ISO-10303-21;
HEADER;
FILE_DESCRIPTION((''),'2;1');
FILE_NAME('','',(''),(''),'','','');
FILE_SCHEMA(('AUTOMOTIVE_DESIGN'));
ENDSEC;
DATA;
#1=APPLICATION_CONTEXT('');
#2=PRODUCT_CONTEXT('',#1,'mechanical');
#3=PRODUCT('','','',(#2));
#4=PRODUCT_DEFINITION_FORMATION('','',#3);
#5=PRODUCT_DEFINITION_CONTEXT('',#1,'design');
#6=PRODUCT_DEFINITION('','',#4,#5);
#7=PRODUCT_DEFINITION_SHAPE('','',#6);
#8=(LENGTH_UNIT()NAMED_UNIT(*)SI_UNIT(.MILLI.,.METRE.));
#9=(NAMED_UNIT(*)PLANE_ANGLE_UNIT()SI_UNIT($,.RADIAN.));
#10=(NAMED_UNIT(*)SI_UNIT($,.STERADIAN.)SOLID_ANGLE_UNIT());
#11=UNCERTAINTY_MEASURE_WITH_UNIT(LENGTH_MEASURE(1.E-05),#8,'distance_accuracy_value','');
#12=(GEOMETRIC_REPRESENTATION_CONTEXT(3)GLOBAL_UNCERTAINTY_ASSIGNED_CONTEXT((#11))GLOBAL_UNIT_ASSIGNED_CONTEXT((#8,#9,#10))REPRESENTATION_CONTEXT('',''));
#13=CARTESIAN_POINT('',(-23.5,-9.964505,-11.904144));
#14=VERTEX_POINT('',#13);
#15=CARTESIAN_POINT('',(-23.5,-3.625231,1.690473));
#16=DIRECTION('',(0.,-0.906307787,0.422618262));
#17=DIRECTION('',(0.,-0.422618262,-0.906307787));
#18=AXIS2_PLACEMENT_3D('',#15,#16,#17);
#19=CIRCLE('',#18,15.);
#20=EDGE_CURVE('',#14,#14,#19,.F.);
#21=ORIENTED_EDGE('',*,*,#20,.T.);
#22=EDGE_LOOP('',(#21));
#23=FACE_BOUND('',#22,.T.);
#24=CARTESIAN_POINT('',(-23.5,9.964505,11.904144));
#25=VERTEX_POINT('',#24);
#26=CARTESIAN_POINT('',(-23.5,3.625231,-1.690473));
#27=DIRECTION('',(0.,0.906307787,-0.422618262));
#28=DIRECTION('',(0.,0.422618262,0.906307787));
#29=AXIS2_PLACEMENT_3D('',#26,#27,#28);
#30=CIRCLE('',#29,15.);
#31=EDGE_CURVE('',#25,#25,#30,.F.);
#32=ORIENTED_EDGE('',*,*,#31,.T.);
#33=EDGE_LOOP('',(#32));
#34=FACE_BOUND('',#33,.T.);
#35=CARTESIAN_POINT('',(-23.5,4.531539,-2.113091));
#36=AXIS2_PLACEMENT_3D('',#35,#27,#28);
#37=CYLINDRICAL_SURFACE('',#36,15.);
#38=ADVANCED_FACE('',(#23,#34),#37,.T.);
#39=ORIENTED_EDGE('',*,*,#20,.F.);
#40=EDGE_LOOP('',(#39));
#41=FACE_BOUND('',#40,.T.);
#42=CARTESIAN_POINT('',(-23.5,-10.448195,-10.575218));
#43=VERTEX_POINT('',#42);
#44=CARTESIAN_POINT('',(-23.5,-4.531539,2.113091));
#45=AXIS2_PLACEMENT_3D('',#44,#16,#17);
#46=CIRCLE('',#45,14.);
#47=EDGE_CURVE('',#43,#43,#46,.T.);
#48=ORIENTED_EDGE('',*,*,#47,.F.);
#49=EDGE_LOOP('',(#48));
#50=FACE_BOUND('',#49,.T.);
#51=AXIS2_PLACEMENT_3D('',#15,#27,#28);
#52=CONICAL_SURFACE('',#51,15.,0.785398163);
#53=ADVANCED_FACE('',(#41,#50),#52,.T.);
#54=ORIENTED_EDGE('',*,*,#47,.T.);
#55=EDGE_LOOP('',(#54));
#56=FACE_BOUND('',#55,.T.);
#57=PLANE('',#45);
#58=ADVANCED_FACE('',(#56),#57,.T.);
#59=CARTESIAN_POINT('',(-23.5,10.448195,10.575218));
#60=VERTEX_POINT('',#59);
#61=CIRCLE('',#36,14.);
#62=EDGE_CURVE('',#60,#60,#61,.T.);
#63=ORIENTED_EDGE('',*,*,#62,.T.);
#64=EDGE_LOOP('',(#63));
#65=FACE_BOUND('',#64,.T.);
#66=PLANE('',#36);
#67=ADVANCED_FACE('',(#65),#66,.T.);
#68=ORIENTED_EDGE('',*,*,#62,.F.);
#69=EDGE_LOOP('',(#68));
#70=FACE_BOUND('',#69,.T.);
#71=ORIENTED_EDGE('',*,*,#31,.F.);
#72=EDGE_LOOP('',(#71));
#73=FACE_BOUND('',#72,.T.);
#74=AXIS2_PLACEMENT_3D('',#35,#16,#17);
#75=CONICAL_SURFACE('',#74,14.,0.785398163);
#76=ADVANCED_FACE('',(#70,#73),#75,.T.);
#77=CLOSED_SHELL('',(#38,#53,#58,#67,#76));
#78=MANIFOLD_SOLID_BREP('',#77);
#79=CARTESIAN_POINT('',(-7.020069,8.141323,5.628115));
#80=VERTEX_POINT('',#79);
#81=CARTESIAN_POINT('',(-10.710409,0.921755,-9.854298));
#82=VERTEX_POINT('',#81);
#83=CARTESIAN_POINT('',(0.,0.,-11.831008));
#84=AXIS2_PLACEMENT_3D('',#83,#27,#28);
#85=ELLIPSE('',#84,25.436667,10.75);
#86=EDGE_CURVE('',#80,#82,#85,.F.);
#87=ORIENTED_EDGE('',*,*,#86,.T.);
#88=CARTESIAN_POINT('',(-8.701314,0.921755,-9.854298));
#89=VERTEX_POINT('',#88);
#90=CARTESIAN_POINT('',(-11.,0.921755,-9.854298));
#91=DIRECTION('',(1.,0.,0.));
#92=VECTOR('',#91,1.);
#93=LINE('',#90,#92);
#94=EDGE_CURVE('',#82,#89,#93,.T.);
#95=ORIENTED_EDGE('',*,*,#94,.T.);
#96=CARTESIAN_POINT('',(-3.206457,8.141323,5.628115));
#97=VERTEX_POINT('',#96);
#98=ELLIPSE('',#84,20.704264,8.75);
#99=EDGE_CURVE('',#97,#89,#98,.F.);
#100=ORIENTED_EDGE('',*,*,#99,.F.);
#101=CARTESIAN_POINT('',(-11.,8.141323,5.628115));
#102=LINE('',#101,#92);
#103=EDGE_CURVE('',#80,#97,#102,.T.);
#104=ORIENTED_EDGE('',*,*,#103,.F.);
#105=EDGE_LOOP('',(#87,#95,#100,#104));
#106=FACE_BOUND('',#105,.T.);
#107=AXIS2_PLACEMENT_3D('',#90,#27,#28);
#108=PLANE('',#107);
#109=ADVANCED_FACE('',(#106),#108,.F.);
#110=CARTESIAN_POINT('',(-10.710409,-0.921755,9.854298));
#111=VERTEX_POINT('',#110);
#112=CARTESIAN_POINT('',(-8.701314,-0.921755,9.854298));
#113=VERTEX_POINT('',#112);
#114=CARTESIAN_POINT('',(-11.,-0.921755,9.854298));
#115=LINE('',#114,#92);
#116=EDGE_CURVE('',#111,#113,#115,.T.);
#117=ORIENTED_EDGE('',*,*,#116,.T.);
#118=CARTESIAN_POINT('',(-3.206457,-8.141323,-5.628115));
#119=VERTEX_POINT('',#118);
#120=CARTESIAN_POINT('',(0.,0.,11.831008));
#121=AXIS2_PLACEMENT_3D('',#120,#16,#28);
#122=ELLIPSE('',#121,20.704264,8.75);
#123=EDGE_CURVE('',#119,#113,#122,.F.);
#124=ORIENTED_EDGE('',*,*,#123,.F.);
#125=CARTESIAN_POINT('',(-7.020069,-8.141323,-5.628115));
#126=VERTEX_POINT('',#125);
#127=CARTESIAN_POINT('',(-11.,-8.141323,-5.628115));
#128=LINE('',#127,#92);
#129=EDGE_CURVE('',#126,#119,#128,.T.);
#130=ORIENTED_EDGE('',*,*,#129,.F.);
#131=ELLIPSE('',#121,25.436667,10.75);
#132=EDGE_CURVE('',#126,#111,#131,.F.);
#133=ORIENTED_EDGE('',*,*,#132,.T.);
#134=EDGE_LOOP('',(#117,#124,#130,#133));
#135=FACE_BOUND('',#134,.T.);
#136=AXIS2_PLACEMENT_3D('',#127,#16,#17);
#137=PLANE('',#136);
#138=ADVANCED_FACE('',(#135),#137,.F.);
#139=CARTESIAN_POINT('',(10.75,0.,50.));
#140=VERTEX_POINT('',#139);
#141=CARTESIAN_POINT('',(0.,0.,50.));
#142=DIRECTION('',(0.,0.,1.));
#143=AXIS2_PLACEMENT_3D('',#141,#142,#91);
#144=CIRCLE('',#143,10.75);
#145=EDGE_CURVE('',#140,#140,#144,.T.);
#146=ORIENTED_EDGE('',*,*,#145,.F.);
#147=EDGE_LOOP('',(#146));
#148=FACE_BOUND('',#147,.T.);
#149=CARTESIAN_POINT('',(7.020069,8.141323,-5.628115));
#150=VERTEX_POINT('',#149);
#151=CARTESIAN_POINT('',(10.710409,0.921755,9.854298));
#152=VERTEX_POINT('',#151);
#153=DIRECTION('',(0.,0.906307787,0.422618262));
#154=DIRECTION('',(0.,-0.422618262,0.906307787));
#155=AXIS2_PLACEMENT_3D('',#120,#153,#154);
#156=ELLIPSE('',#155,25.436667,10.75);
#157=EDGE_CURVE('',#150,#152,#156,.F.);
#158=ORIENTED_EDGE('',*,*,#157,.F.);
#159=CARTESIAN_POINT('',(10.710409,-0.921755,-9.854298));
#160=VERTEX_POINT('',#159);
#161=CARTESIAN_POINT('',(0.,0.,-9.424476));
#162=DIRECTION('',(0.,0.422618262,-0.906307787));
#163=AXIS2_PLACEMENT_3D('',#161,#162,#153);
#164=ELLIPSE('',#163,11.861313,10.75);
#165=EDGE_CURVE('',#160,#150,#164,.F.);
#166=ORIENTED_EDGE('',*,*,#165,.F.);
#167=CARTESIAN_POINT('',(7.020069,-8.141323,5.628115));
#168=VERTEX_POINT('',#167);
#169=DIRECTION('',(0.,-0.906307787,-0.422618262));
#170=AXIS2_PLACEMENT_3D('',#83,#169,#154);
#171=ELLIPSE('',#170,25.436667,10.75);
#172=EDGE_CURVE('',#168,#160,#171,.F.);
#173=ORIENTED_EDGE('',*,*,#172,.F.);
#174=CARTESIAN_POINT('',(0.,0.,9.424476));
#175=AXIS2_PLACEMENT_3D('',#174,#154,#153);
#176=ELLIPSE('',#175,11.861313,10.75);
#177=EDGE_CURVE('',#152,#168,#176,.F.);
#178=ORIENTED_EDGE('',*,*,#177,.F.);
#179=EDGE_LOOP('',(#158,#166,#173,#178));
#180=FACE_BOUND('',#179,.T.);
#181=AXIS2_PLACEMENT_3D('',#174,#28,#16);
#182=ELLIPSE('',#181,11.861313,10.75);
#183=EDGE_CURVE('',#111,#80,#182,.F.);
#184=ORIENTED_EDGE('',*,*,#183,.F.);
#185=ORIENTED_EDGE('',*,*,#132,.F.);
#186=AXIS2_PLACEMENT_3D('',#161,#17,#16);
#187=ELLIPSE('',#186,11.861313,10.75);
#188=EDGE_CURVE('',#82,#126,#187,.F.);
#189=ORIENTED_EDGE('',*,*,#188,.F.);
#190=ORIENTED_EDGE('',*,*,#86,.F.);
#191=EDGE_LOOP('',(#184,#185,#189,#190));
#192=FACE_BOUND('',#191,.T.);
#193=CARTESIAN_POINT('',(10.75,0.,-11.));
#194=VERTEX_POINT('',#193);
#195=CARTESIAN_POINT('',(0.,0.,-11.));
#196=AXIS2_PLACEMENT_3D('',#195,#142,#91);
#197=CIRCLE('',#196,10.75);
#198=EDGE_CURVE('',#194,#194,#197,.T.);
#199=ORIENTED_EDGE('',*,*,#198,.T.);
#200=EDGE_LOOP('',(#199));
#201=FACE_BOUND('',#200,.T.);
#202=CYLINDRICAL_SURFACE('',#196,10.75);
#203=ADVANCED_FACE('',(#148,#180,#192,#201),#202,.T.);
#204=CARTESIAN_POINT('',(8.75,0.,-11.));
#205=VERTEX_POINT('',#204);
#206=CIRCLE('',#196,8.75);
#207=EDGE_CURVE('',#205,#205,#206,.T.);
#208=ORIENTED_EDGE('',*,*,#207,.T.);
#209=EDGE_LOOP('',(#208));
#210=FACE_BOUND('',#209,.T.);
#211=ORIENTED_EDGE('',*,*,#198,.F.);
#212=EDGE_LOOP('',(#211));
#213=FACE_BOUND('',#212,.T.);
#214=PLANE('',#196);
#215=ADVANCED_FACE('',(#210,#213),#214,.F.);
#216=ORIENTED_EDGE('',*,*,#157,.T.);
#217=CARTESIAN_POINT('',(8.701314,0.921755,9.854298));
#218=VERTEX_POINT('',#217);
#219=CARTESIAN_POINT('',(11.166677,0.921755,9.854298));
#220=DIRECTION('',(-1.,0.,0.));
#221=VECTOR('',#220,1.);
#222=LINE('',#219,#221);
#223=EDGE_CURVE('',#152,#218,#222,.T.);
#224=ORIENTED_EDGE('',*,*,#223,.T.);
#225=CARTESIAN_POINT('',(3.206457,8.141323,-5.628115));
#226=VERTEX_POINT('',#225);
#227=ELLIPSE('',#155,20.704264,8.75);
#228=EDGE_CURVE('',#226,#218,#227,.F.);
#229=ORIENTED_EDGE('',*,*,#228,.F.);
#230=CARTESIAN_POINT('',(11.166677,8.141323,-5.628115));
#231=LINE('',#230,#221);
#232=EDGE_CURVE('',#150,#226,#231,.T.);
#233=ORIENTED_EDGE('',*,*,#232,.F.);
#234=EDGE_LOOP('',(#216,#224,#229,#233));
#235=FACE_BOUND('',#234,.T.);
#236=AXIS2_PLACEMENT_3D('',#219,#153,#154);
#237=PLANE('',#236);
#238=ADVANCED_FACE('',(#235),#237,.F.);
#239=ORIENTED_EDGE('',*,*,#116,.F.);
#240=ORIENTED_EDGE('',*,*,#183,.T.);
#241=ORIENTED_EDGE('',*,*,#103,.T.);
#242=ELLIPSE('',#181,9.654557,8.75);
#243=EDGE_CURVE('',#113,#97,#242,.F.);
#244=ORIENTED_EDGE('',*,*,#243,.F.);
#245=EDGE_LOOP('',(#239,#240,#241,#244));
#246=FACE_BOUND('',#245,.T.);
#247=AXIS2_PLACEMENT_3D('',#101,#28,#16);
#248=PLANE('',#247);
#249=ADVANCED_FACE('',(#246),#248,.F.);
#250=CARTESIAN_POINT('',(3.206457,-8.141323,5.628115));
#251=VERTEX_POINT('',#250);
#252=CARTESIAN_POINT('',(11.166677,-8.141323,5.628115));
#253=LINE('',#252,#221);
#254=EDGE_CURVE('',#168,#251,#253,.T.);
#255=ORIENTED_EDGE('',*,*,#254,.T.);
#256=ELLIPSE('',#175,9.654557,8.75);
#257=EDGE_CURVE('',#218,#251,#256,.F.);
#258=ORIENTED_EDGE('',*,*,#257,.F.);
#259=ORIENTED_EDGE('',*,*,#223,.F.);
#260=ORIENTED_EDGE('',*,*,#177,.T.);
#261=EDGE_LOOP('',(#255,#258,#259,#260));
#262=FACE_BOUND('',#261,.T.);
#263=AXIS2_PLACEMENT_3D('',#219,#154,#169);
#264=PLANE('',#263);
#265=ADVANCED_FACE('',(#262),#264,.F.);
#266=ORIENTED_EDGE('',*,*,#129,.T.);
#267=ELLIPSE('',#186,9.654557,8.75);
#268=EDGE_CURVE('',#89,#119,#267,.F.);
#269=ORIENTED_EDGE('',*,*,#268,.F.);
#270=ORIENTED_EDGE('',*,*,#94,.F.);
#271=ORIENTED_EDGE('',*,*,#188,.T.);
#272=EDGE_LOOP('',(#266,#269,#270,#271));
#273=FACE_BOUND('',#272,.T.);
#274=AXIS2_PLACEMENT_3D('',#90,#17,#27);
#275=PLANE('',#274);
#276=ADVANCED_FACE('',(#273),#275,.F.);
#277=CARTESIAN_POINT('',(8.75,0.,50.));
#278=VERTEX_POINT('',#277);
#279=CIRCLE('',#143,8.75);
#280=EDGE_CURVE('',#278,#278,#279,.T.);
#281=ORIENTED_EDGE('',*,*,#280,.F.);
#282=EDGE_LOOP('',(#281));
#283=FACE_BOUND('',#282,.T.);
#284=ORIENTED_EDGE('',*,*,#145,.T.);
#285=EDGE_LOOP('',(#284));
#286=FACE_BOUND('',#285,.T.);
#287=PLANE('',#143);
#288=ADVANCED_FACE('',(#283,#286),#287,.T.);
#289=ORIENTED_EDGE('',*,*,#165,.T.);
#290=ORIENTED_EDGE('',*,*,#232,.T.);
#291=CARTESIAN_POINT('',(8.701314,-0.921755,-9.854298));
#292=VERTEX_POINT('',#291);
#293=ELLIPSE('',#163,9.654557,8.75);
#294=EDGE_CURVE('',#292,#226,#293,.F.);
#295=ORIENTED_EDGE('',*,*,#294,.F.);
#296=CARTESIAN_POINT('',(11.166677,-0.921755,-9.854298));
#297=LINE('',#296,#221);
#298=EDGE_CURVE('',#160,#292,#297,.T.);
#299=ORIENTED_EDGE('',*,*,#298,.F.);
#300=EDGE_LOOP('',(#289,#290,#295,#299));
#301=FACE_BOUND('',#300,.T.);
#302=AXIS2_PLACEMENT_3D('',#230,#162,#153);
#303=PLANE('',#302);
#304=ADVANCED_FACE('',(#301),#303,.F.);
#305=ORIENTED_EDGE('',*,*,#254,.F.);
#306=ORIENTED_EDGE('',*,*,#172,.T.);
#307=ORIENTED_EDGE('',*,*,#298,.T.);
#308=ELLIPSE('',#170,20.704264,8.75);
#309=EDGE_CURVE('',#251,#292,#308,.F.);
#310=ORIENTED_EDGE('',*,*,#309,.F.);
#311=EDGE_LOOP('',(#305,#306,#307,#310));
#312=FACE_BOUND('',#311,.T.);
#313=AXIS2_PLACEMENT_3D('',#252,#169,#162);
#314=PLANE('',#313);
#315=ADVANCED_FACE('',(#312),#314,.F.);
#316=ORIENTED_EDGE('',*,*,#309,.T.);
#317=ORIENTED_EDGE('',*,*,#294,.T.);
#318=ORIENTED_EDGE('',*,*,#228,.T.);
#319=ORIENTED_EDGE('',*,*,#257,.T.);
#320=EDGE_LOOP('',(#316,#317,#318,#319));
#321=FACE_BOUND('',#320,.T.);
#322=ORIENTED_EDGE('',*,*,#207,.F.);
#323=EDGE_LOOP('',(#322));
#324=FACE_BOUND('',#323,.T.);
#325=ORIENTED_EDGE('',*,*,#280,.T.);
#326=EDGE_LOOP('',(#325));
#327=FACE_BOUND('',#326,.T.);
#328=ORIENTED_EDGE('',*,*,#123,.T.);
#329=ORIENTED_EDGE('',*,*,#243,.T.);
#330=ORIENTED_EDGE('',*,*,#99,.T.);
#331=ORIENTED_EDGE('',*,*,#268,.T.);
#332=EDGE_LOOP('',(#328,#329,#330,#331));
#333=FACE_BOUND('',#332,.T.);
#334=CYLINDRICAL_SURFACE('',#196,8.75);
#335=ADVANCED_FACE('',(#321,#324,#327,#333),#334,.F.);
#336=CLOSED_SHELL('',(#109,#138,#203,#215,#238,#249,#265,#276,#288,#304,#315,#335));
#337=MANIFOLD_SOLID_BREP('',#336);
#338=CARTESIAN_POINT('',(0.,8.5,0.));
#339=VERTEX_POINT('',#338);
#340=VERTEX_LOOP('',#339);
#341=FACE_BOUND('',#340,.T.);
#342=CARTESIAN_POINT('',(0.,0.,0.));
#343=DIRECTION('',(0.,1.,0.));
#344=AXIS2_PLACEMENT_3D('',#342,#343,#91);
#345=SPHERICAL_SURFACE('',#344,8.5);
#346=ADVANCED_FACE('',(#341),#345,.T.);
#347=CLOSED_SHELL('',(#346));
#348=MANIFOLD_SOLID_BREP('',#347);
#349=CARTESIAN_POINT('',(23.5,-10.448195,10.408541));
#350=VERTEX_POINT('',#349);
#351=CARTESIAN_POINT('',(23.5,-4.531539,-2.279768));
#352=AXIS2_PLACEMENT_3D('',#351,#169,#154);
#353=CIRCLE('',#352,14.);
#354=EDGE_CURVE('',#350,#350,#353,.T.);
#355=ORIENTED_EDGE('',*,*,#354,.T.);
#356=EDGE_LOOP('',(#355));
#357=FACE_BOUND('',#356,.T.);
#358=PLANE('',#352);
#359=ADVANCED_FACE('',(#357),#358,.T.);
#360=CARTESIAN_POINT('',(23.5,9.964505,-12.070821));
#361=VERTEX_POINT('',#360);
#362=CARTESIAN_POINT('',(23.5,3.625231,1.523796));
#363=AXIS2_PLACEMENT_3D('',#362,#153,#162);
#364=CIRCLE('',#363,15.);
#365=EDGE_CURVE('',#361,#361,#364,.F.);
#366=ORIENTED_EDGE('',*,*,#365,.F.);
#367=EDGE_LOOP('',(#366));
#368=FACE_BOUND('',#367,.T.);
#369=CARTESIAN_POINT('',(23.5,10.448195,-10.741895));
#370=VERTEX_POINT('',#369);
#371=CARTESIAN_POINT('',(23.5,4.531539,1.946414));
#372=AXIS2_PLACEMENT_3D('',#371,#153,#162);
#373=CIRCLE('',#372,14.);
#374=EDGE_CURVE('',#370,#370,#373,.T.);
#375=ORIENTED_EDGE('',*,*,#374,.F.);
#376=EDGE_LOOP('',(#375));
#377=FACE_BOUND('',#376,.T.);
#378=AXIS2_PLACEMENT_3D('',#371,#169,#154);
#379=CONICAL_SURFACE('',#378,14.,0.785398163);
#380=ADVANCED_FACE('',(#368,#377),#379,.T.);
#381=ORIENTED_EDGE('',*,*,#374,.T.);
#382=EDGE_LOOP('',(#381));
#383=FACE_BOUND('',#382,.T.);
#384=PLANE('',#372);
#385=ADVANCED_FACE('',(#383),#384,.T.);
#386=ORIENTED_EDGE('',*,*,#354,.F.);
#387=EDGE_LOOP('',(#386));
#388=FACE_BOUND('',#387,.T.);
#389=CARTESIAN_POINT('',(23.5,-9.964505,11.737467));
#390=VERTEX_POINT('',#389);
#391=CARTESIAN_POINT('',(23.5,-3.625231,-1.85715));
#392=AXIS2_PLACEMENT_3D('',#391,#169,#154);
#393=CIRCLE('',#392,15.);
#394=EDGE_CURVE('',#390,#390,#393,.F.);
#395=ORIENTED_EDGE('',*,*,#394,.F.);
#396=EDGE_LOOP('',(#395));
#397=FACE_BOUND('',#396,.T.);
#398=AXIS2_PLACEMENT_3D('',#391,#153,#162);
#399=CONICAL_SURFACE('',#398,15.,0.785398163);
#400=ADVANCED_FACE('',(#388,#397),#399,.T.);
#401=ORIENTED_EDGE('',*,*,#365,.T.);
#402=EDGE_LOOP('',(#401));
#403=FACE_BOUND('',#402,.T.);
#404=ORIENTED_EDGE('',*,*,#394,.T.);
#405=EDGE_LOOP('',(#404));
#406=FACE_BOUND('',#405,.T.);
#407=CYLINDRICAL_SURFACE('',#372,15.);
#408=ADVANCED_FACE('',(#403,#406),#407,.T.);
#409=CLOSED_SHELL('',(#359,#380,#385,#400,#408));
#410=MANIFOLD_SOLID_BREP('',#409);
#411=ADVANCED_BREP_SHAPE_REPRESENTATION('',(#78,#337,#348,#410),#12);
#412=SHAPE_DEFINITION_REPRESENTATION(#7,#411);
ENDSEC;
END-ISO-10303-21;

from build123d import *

# Parameters (mm, degrees)
CHAMFER1_SIZE            = 1
CIRPATTERN1_COUNT        = 2
BOSS_EXTRUDE2_DEPTH      = 50
BOSS_EXTRUDE2_DEPTH_BACK = 11
SKETCH9_R                = 10.75
SKETCH9_R_2              = 8.75
CUT_EXTRUDE1_DEPTH       = 11
CIRPATTERN2_START        = -8.541476068
CIRPATTERN2_OUTLINE_W    = 10
CIRPATTERN2_OUTLINE_H    = 10
CIRPATTERN2_DEPTH        = 17.082952136


# Read off the part's stored shape, not the designer's step: CirPattern2
with BuildPart() as part:
    # Sketch4 → Revolve4 (revolve)
    with BuildSketch(Plane.XY):
        with BuildLine():
            Line((0, 8.5), (0, -8.5))
            ThreePointArc((0, -8.5), (-8.5, 0), (0, 8.5))
        make_face()
    revolve(axis=Axis((0, 8.5, 0), (0, -1, 0)))


with BuildPart() as body_2:
    # Sketch7 → Revolve5 (revolve)
    with BuildSketch(Plane.ZY.offset(23.5), mode=Mode.PRIVATE) as revolve5_sk:
        Polygon((2.113091309, -4.531538935), (-11.481525497, -10.870812861), (-15.707708114, -1.807734991), (-2.113091309, 4.531538935), align=None)
    revolve(revolve5_sk.sketch.rotate(Axis((-23.5, 4.531538935, -2.113091309), (-2.7755575615628933e-15, -0.9063077870366493, 0.42261826174070116)), 180), axis=Axis((-23.5, 4.531538935, -2.113091309), (-2.7755575615628933e-15, -0.9063077870366493, 0.42261826174070116)))

    # Chamfer1
    chamfer1_edges = [body_2.edges().sort_by_distance(p)[0] for p in [
        (-23.5, -1.807734991, -15.707708114),
        (-23.5, -10.870812861, -11.481525497),
    ]]
    chamfer(chamfer1_edges, length=CHAMFER1_SIZE)


with BuildPart() as cirpattern1_1:
    # CirPattern1: pattern copy
    add(body_2.part.rotate(Axis((0, 0.119054888, -0.083338421), (0, 1, 0)), 1 * 360 / CIRPATTERN1_COUNT))


with BuildPart() as body_4:
    # Sketch9 → Boss-Extrude2 (new, two sides: drawn at the far end of the back side and taken through both)
    with BuildSketch(Plane.XY.offset(-BOSS_EXTRUDE2_DEPTH_BACK)):
        Circle(SKETCH9_R)
        Circle(SKETCH9_R_2, mode=Mode.SUBTRACT)
    extrude(amount=BOSS_EXTRUDE2_DEPTH + BOSS_EXTRUDE2_DEPTH_BACK)

    # Sketch11 → Cut-Extrude1 (cut)
    with BuildSketch(Plane(origin=(0, 0, 0), x_dir=(0, 0, -1), z_dir=(1, 0, 0))):
        Polygon((9.854297582, 0.921755167), (-5.628114964, 8.141322704), (-9.854297582, -0.921755167), (5.628114964, -8.141322704), align=None)
    extrude(amount=-CUT_EXTRUDE1_DEPTH, mode=Mode.SUBTRACT)

    # CirPattern2 outline → CirPattern2 (cut)
    with BuildSketch(Plane(origin=(0, 0, 0), x_dir=(1, 0, 0), z_dir=(0, 0.4226182617407011, -0.9063077870366493)).offset(CIRPATTERN2_START)):
        with Locations((7, 0)):
            Rectangle(CIRPATTERN2_OUTLINE_W, CIRPATTERN2_OUTLINE_H)
    extrude(amount=CIRPATTERN2_DEPTH, mode=Mode.SUBTRACT)


solid = Compound([part.part, body_2.part, cirpattern1_1.part, body_4.part])
